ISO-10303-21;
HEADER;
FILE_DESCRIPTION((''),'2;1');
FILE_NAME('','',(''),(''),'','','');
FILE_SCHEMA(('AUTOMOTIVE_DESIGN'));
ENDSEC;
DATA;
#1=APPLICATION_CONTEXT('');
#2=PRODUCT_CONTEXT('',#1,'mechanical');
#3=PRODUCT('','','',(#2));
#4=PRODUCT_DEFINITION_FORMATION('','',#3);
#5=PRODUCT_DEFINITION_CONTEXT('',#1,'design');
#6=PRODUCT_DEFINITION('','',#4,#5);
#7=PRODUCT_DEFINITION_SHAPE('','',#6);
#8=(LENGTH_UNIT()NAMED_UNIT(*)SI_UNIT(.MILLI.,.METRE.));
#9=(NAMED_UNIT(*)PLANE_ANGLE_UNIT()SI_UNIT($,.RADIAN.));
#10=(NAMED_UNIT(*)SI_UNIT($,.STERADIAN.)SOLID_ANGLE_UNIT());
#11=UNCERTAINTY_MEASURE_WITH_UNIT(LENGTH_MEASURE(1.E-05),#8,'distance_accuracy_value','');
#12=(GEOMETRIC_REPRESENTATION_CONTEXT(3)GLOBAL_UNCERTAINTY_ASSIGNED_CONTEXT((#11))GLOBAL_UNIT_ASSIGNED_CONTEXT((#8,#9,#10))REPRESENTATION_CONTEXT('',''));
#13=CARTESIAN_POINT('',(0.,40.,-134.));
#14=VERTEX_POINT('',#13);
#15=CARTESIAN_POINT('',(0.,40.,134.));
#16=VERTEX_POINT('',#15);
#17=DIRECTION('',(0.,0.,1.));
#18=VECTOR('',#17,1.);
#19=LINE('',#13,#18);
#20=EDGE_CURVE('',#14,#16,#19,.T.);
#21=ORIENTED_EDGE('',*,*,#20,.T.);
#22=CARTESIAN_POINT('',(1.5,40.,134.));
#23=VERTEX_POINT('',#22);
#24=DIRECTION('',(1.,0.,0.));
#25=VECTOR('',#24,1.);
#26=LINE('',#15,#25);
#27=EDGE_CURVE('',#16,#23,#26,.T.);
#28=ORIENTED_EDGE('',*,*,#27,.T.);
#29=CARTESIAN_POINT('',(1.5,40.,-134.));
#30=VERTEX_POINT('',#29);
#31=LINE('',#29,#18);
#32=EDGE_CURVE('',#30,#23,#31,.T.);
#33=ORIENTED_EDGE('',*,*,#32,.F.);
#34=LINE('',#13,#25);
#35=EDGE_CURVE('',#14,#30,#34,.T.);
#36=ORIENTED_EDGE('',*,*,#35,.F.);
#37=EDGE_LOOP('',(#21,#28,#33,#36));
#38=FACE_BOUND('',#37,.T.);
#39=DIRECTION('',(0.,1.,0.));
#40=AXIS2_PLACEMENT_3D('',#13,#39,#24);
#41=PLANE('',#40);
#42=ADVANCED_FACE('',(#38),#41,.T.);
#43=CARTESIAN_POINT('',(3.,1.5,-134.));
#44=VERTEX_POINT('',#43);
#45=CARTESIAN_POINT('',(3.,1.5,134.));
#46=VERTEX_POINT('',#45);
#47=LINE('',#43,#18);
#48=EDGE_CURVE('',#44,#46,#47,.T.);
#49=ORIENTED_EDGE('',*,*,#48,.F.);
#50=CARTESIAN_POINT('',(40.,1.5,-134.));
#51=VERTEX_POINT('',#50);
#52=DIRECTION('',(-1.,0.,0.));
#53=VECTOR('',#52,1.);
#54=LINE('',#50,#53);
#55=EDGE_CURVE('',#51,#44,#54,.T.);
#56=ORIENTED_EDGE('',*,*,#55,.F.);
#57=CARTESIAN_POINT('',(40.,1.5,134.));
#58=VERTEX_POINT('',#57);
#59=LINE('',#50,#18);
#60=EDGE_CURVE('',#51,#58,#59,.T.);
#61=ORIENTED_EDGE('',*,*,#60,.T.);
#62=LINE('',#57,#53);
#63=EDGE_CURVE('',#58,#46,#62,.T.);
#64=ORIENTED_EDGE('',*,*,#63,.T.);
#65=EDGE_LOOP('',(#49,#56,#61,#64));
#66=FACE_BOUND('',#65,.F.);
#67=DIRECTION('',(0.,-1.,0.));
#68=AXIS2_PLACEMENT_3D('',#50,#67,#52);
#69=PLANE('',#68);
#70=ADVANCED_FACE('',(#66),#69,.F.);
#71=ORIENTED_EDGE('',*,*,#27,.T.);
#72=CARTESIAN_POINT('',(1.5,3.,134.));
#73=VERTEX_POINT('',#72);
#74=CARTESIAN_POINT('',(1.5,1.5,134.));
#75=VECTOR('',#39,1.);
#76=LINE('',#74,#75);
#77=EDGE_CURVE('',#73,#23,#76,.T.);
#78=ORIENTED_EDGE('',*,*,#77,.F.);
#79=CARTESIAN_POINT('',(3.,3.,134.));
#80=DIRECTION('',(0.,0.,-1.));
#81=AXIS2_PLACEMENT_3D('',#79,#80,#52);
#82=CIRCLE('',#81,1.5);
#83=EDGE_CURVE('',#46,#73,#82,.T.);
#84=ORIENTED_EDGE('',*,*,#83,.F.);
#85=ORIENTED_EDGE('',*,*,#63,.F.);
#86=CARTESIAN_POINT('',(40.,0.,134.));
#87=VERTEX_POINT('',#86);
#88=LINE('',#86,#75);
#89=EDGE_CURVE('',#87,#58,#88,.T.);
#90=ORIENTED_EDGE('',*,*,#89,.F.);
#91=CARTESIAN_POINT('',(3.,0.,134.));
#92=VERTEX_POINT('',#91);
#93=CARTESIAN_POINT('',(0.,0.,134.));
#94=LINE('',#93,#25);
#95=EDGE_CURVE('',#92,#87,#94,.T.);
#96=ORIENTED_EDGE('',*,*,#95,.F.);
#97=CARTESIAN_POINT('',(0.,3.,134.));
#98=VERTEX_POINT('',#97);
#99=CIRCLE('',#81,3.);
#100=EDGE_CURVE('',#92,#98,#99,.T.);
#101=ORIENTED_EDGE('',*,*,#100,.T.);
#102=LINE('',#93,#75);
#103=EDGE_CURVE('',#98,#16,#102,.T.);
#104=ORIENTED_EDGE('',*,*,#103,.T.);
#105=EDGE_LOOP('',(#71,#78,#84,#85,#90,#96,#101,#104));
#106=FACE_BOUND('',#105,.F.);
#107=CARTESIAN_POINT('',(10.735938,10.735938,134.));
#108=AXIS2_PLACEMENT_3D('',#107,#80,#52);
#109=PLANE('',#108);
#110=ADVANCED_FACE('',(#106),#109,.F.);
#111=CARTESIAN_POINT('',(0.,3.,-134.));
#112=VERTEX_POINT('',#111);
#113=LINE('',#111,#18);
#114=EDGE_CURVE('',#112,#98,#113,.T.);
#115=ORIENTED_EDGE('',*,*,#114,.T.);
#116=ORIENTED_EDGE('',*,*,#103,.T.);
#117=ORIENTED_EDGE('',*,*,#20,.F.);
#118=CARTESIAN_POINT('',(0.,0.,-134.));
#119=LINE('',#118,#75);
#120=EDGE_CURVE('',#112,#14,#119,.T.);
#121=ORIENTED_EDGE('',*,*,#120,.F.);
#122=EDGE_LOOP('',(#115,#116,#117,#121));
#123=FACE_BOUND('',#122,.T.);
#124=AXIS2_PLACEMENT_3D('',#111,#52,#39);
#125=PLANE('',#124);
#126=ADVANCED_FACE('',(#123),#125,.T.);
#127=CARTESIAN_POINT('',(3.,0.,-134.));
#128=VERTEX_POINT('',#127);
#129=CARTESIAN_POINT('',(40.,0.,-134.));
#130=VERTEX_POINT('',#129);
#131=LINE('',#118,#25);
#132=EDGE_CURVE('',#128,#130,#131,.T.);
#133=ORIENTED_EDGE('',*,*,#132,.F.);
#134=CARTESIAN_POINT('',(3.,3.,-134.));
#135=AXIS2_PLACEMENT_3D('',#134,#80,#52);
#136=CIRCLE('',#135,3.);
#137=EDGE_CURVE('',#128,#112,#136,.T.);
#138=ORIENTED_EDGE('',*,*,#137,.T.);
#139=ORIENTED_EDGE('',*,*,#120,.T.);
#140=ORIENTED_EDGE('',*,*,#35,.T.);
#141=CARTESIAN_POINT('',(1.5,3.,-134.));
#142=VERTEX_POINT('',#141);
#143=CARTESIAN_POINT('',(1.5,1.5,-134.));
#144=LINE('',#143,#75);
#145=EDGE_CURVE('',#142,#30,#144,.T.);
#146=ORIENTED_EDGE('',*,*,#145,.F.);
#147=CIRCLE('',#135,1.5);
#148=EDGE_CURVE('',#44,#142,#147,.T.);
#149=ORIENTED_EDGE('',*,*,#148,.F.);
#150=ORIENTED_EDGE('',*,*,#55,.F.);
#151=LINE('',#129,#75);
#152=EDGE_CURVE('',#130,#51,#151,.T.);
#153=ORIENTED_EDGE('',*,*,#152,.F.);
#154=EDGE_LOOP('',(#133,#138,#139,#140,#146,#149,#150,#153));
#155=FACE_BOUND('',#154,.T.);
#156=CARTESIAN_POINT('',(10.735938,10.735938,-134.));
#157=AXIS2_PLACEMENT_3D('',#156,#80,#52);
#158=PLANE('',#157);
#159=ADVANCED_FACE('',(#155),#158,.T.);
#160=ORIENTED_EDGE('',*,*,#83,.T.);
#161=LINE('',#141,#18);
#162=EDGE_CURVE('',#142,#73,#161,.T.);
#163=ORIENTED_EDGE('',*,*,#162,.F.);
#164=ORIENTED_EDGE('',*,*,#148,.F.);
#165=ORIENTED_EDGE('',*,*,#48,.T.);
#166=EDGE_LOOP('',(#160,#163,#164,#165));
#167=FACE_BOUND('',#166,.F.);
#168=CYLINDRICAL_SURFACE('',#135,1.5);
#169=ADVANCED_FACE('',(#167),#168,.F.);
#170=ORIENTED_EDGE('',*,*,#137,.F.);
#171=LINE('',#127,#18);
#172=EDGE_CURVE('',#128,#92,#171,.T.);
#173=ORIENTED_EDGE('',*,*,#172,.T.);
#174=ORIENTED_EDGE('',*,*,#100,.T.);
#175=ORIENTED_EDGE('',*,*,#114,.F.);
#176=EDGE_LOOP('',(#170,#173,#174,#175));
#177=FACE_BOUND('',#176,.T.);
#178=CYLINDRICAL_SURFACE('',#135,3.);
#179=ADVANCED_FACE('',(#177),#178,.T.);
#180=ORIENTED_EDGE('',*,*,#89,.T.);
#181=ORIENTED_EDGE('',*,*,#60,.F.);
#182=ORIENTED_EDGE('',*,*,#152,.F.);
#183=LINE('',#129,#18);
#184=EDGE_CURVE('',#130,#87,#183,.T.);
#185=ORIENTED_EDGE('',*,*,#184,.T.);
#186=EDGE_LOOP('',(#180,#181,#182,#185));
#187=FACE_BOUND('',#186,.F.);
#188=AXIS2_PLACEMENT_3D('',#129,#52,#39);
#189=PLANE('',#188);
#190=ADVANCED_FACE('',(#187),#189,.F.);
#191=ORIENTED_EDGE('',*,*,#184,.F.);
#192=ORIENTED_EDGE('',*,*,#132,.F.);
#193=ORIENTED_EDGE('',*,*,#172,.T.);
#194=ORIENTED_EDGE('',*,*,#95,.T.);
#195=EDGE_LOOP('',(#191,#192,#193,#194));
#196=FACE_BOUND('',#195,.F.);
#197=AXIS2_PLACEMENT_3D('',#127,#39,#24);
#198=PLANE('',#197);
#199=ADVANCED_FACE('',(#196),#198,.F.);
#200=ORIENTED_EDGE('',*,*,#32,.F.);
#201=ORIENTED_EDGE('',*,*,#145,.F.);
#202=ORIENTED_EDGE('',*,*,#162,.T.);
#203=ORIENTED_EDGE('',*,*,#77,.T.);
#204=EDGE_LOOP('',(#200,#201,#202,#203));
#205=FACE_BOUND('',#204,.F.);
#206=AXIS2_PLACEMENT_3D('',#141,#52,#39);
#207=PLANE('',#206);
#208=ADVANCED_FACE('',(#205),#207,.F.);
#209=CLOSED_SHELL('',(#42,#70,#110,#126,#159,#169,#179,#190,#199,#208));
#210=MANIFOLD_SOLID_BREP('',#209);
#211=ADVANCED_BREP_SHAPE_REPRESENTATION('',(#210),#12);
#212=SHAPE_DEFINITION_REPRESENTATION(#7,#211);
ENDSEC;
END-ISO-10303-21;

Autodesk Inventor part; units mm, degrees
ref_plane "YZ Plane" through (0, 0, 0) normal (1, 0, 0) x (0, 1, 0)
ref_plane "XZ Plane" through (0, 0, 0) normal (0, 1, 0) x (-1, 0, 0)
ref_plane "XY Plane" through (0, 0, 0) normal (0, 0, 1) x (1, 0, 0)
sketch "Sketch1" plane through (0, 0, 0) normal (0, 0, 1) x (1, 0, 0)
  line L0 (0, 0) -> (0, 40)
  line L1 (0, 0) -> (40, 0)
  dimension "d0" = 40
  dimension "d1" = 40
contour flange "Contour Flange1" sketch "Sketch1" thickness 1.5 bend radius 1.5 width 268 along (0, 0, 1) mid plane yes both sides no wall seen from (0, 20, 0) lies toward (1, 0, 0) curves L0 L1
bend "Bend1"
corner "Corner1"
equation "\"d2\" = BendReliefWidth"
equation "\"d3\" = BendReliefDepth"
equation "\"d4\" = MinimumRemnant"
equation "\"d5\" = BendRadius"
equation "\"d7\" = BendRadius"
equation "\"d9\" = CornerReliefSize"
equation "\"d10\" = GapSize"
equation "\"d11\" = JacobiRadiusSize"
equation "\"BendRadius\" = Thickness"
equation "\"BendReliefWidth\" = Thickness"
equation "\"BendReliefDepth\" = 0.5 * Thickness"
equation "\"CornerReliefSize\" = 4 * Thickness"
equation "\"MinimumRemnant\" = 2 * Thickness"
equation "\"TransitionRadius\" = BendRadius"
equation "\"JacobiRadiusSize\" = BendRadius"
equation "\"GapSize\" = Thickness"
equation "\"Thickness\" = 1.5"
properties part number "L 40x40x268" material "Stainless Steel"
